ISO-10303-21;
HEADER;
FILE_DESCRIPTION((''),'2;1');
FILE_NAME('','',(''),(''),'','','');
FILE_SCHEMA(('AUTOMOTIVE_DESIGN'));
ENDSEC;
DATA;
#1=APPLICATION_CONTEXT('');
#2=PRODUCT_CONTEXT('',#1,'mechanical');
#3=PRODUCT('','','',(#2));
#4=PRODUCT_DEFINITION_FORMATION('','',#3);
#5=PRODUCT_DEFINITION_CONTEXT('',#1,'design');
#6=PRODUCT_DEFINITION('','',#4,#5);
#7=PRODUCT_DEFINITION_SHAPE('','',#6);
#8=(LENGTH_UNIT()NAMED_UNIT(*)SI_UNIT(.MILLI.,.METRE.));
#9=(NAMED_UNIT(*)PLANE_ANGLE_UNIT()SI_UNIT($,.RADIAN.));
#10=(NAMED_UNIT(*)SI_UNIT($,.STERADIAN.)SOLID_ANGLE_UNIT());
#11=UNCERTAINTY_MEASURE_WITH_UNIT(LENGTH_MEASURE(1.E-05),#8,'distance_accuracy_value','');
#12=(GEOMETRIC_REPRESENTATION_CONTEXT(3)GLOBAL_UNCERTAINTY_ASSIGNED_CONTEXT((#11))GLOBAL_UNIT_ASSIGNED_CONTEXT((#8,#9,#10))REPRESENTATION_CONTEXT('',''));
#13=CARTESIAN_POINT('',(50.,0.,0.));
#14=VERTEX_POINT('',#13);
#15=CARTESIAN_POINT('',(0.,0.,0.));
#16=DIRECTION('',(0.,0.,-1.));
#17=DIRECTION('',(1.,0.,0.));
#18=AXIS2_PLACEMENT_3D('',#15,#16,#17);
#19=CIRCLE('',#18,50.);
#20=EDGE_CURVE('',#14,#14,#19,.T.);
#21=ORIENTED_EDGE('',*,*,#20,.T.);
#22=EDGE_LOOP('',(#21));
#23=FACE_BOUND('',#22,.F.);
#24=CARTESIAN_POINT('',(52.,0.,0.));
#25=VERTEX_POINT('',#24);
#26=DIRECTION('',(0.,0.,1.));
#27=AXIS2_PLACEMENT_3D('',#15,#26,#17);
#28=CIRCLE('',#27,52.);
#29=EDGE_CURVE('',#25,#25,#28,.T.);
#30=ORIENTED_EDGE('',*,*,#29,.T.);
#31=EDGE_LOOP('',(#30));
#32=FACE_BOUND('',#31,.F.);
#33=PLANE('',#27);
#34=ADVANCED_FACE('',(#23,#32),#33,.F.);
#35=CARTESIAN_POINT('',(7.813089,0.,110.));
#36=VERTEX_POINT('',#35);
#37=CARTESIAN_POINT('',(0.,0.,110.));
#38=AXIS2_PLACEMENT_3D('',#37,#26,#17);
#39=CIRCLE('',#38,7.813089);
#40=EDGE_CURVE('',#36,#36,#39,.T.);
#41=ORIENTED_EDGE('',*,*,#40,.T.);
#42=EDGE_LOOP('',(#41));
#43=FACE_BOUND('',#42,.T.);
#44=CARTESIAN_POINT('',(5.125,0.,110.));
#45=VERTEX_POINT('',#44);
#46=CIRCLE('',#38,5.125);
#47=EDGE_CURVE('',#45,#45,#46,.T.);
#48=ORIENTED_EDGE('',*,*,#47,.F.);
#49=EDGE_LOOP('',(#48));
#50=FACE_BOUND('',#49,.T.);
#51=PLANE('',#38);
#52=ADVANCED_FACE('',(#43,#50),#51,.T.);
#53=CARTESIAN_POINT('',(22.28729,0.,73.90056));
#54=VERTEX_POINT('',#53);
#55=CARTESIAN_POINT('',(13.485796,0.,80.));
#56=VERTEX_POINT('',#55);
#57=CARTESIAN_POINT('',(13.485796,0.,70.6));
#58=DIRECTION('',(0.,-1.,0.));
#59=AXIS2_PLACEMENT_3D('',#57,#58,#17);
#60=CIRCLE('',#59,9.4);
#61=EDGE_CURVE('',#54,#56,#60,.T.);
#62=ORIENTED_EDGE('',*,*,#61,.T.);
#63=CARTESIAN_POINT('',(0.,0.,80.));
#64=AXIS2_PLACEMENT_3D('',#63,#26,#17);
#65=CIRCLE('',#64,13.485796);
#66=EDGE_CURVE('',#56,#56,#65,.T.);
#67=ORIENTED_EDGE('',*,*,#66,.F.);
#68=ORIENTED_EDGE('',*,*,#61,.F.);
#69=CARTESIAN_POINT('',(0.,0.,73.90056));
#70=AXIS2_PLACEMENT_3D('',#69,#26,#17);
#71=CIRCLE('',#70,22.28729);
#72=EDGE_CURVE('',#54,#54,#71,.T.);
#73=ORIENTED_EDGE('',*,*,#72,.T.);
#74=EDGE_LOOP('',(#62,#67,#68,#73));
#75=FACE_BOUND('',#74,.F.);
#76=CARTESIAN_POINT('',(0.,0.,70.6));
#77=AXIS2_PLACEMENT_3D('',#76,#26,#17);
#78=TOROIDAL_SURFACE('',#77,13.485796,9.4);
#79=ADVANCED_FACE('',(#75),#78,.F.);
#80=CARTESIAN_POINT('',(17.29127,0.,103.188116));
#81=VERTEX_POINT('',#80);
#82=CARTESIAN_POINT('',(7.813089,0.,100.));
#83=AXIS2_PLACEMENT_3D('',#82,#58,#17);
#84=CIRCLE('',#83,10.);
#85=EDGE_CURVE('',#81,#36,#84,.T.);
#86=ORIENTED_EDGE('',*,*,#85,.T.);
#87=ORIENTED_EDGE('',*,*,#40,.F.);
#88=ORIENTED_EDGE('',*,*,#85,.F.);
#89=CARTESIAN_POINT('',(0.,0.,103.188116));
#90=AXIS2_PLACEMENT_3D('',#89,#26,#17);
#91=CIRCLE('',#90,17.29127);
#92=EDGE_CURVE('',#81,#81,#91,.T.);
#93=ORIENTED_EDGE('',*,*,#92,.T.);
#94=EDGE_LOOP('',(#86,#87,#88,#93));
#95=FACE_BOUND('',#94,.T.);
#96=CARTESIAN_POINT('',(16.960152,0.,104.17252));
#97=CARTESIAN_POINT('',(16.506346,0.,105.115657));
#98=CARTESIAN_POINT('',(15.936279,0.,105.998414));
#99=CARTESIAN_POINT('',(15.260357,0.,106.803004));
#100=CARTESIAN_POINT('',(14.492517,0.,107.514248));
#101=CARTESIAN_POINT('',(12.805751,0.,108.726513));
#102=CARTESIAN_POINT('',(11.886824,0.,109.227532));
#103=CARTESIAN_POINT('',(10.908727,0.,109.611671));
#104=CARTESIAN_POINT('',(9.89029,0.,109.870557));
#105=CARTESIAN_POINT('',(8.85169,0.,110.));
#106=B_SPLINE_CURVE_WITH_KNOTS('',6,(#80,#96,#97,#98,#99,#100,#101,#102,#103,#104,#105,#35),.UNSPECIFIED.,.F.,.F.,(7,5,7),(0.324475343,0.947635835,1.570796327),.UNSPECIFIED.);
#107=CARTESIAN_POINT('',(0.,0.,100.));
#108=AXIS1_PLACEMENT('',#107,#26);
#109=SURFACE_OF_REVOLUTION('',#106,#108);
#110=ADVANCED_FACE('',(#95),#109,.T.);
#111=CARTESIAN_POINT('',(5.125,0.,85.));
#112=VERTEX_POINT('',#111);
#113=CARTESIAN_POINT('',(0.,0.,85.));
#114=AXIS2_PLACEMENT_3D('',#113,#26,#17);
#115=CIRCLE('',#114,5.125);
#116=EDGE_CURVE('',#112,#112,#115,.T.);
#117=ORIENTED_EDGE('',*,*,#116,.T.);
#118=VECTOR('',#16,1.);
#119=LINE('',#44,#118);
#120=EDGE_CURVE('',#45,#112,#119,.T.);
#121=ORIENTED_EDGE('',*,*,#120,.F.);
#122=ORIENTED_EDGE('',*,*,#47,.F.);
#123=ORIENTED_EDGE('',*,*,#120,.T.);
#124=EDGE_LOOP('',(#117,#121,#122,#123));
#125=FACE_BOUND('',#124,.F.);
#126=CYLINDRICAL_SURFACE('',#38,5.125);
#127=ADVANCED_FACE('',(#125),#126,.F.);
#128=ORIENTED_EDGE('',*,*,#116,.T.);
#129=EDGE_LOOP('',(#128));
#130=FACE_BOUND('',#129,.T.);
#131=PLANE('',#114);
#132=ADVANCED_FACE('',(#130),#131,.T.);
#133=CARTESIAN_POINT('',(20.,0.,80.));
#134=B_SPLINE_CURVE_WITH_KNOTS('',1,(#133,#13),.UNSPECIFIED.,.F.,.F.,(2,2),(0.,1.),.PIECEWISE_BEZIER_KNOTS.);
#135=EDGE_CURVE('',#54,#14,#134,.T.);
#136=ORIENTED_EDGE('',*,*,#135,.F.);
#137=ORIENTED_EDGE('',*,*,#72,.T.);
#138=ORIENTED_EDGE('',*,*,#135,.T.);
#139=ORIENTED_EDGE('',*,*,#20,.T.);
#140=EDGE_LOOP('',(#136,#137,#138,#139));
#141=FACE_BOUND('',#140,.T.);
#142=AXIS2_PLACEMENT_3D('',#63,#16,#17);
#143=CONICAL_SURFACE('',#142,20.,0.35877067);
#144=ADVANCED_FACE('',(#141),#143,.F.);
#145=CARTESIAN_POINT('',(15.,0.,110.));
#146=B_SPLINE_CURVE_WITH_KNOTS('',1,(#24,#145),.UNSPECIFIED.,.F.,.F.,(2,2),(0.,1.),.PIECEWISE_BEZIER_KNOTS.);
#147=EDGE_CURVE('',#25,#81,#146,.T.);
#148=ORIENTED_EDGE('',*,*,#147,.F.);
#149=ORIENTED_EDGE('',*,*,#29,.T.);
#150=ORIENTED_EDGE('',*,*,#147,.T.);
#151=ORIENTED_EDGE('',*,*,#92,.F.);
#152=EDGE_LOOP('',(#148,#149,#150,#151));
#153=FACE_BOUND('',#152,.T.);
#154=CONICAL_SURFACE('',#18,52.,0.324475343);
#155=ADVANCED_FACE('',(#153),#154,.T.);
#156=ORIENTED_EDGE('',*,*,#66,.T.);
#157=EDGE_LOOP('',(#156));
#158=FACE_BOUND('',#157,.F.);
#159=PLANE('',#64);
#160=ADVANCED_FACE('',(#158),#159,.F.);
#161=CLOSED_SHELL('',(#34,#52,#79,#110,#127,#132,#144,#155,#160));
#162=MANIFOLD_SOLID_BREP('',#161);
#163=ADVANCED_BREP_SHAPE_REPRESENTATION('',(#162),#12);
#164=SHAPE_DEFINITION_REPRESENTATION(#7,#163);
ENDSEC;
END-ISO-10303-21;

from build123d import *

# Parameters (mm, degrees)
F0_R      = 52
F4_R      = 15
F2_R      = 20
F6_R      = 50
F9_R      = 5.125
F10_DEPTH = 25
F11_R     = 10
F12_R     = 9.4


with BuildPart() as f5:
    # F0 (on Top) → F5 section 0
    with BuildSketch(Plane.XY):
        Circle(F0_R)
    # F4 (on offset) → F5 section 1
    with BuildSketch(Plane.XY.offset(110)):
        Circle(F4_R)
    loft()

    # F2 (on offset) → F7 section 0
    with BuildSketch(Plane.XY.offset(80)):
        Circle(F2_R)
    # F6 (on face) → F7 section 1
    with BuildSketch(Plane(origin=(0, 0, 0), x_dir=(1, 0, 0), z_dir=(0, 0, -1))):
        Circle(F6_R)
    loft(mode=Mode.SUBTRACT)

    # F9 (on face) → F10 (cut)
    with BuildSketch(Plane.XY.offset(110)):
        Circle(F9_R)
    extrude(amount=-F10_DEPTH, mode=Mode.SUBTRACT)

    # F11
    f11_edges = [f5.edges().sort_by_distance(p)[0] for p in [
        (-15, 0, 110),
    ]]
    fillet(f11_edges, radius=F11_R)

    # F12
    f12_edges = [f5.edges().sort_by_distance(p)[0] for p in [
        (-20, 0, 80),
    ]]
    fillet(f12_edges, radius=F12_R)


solid = f5.part
